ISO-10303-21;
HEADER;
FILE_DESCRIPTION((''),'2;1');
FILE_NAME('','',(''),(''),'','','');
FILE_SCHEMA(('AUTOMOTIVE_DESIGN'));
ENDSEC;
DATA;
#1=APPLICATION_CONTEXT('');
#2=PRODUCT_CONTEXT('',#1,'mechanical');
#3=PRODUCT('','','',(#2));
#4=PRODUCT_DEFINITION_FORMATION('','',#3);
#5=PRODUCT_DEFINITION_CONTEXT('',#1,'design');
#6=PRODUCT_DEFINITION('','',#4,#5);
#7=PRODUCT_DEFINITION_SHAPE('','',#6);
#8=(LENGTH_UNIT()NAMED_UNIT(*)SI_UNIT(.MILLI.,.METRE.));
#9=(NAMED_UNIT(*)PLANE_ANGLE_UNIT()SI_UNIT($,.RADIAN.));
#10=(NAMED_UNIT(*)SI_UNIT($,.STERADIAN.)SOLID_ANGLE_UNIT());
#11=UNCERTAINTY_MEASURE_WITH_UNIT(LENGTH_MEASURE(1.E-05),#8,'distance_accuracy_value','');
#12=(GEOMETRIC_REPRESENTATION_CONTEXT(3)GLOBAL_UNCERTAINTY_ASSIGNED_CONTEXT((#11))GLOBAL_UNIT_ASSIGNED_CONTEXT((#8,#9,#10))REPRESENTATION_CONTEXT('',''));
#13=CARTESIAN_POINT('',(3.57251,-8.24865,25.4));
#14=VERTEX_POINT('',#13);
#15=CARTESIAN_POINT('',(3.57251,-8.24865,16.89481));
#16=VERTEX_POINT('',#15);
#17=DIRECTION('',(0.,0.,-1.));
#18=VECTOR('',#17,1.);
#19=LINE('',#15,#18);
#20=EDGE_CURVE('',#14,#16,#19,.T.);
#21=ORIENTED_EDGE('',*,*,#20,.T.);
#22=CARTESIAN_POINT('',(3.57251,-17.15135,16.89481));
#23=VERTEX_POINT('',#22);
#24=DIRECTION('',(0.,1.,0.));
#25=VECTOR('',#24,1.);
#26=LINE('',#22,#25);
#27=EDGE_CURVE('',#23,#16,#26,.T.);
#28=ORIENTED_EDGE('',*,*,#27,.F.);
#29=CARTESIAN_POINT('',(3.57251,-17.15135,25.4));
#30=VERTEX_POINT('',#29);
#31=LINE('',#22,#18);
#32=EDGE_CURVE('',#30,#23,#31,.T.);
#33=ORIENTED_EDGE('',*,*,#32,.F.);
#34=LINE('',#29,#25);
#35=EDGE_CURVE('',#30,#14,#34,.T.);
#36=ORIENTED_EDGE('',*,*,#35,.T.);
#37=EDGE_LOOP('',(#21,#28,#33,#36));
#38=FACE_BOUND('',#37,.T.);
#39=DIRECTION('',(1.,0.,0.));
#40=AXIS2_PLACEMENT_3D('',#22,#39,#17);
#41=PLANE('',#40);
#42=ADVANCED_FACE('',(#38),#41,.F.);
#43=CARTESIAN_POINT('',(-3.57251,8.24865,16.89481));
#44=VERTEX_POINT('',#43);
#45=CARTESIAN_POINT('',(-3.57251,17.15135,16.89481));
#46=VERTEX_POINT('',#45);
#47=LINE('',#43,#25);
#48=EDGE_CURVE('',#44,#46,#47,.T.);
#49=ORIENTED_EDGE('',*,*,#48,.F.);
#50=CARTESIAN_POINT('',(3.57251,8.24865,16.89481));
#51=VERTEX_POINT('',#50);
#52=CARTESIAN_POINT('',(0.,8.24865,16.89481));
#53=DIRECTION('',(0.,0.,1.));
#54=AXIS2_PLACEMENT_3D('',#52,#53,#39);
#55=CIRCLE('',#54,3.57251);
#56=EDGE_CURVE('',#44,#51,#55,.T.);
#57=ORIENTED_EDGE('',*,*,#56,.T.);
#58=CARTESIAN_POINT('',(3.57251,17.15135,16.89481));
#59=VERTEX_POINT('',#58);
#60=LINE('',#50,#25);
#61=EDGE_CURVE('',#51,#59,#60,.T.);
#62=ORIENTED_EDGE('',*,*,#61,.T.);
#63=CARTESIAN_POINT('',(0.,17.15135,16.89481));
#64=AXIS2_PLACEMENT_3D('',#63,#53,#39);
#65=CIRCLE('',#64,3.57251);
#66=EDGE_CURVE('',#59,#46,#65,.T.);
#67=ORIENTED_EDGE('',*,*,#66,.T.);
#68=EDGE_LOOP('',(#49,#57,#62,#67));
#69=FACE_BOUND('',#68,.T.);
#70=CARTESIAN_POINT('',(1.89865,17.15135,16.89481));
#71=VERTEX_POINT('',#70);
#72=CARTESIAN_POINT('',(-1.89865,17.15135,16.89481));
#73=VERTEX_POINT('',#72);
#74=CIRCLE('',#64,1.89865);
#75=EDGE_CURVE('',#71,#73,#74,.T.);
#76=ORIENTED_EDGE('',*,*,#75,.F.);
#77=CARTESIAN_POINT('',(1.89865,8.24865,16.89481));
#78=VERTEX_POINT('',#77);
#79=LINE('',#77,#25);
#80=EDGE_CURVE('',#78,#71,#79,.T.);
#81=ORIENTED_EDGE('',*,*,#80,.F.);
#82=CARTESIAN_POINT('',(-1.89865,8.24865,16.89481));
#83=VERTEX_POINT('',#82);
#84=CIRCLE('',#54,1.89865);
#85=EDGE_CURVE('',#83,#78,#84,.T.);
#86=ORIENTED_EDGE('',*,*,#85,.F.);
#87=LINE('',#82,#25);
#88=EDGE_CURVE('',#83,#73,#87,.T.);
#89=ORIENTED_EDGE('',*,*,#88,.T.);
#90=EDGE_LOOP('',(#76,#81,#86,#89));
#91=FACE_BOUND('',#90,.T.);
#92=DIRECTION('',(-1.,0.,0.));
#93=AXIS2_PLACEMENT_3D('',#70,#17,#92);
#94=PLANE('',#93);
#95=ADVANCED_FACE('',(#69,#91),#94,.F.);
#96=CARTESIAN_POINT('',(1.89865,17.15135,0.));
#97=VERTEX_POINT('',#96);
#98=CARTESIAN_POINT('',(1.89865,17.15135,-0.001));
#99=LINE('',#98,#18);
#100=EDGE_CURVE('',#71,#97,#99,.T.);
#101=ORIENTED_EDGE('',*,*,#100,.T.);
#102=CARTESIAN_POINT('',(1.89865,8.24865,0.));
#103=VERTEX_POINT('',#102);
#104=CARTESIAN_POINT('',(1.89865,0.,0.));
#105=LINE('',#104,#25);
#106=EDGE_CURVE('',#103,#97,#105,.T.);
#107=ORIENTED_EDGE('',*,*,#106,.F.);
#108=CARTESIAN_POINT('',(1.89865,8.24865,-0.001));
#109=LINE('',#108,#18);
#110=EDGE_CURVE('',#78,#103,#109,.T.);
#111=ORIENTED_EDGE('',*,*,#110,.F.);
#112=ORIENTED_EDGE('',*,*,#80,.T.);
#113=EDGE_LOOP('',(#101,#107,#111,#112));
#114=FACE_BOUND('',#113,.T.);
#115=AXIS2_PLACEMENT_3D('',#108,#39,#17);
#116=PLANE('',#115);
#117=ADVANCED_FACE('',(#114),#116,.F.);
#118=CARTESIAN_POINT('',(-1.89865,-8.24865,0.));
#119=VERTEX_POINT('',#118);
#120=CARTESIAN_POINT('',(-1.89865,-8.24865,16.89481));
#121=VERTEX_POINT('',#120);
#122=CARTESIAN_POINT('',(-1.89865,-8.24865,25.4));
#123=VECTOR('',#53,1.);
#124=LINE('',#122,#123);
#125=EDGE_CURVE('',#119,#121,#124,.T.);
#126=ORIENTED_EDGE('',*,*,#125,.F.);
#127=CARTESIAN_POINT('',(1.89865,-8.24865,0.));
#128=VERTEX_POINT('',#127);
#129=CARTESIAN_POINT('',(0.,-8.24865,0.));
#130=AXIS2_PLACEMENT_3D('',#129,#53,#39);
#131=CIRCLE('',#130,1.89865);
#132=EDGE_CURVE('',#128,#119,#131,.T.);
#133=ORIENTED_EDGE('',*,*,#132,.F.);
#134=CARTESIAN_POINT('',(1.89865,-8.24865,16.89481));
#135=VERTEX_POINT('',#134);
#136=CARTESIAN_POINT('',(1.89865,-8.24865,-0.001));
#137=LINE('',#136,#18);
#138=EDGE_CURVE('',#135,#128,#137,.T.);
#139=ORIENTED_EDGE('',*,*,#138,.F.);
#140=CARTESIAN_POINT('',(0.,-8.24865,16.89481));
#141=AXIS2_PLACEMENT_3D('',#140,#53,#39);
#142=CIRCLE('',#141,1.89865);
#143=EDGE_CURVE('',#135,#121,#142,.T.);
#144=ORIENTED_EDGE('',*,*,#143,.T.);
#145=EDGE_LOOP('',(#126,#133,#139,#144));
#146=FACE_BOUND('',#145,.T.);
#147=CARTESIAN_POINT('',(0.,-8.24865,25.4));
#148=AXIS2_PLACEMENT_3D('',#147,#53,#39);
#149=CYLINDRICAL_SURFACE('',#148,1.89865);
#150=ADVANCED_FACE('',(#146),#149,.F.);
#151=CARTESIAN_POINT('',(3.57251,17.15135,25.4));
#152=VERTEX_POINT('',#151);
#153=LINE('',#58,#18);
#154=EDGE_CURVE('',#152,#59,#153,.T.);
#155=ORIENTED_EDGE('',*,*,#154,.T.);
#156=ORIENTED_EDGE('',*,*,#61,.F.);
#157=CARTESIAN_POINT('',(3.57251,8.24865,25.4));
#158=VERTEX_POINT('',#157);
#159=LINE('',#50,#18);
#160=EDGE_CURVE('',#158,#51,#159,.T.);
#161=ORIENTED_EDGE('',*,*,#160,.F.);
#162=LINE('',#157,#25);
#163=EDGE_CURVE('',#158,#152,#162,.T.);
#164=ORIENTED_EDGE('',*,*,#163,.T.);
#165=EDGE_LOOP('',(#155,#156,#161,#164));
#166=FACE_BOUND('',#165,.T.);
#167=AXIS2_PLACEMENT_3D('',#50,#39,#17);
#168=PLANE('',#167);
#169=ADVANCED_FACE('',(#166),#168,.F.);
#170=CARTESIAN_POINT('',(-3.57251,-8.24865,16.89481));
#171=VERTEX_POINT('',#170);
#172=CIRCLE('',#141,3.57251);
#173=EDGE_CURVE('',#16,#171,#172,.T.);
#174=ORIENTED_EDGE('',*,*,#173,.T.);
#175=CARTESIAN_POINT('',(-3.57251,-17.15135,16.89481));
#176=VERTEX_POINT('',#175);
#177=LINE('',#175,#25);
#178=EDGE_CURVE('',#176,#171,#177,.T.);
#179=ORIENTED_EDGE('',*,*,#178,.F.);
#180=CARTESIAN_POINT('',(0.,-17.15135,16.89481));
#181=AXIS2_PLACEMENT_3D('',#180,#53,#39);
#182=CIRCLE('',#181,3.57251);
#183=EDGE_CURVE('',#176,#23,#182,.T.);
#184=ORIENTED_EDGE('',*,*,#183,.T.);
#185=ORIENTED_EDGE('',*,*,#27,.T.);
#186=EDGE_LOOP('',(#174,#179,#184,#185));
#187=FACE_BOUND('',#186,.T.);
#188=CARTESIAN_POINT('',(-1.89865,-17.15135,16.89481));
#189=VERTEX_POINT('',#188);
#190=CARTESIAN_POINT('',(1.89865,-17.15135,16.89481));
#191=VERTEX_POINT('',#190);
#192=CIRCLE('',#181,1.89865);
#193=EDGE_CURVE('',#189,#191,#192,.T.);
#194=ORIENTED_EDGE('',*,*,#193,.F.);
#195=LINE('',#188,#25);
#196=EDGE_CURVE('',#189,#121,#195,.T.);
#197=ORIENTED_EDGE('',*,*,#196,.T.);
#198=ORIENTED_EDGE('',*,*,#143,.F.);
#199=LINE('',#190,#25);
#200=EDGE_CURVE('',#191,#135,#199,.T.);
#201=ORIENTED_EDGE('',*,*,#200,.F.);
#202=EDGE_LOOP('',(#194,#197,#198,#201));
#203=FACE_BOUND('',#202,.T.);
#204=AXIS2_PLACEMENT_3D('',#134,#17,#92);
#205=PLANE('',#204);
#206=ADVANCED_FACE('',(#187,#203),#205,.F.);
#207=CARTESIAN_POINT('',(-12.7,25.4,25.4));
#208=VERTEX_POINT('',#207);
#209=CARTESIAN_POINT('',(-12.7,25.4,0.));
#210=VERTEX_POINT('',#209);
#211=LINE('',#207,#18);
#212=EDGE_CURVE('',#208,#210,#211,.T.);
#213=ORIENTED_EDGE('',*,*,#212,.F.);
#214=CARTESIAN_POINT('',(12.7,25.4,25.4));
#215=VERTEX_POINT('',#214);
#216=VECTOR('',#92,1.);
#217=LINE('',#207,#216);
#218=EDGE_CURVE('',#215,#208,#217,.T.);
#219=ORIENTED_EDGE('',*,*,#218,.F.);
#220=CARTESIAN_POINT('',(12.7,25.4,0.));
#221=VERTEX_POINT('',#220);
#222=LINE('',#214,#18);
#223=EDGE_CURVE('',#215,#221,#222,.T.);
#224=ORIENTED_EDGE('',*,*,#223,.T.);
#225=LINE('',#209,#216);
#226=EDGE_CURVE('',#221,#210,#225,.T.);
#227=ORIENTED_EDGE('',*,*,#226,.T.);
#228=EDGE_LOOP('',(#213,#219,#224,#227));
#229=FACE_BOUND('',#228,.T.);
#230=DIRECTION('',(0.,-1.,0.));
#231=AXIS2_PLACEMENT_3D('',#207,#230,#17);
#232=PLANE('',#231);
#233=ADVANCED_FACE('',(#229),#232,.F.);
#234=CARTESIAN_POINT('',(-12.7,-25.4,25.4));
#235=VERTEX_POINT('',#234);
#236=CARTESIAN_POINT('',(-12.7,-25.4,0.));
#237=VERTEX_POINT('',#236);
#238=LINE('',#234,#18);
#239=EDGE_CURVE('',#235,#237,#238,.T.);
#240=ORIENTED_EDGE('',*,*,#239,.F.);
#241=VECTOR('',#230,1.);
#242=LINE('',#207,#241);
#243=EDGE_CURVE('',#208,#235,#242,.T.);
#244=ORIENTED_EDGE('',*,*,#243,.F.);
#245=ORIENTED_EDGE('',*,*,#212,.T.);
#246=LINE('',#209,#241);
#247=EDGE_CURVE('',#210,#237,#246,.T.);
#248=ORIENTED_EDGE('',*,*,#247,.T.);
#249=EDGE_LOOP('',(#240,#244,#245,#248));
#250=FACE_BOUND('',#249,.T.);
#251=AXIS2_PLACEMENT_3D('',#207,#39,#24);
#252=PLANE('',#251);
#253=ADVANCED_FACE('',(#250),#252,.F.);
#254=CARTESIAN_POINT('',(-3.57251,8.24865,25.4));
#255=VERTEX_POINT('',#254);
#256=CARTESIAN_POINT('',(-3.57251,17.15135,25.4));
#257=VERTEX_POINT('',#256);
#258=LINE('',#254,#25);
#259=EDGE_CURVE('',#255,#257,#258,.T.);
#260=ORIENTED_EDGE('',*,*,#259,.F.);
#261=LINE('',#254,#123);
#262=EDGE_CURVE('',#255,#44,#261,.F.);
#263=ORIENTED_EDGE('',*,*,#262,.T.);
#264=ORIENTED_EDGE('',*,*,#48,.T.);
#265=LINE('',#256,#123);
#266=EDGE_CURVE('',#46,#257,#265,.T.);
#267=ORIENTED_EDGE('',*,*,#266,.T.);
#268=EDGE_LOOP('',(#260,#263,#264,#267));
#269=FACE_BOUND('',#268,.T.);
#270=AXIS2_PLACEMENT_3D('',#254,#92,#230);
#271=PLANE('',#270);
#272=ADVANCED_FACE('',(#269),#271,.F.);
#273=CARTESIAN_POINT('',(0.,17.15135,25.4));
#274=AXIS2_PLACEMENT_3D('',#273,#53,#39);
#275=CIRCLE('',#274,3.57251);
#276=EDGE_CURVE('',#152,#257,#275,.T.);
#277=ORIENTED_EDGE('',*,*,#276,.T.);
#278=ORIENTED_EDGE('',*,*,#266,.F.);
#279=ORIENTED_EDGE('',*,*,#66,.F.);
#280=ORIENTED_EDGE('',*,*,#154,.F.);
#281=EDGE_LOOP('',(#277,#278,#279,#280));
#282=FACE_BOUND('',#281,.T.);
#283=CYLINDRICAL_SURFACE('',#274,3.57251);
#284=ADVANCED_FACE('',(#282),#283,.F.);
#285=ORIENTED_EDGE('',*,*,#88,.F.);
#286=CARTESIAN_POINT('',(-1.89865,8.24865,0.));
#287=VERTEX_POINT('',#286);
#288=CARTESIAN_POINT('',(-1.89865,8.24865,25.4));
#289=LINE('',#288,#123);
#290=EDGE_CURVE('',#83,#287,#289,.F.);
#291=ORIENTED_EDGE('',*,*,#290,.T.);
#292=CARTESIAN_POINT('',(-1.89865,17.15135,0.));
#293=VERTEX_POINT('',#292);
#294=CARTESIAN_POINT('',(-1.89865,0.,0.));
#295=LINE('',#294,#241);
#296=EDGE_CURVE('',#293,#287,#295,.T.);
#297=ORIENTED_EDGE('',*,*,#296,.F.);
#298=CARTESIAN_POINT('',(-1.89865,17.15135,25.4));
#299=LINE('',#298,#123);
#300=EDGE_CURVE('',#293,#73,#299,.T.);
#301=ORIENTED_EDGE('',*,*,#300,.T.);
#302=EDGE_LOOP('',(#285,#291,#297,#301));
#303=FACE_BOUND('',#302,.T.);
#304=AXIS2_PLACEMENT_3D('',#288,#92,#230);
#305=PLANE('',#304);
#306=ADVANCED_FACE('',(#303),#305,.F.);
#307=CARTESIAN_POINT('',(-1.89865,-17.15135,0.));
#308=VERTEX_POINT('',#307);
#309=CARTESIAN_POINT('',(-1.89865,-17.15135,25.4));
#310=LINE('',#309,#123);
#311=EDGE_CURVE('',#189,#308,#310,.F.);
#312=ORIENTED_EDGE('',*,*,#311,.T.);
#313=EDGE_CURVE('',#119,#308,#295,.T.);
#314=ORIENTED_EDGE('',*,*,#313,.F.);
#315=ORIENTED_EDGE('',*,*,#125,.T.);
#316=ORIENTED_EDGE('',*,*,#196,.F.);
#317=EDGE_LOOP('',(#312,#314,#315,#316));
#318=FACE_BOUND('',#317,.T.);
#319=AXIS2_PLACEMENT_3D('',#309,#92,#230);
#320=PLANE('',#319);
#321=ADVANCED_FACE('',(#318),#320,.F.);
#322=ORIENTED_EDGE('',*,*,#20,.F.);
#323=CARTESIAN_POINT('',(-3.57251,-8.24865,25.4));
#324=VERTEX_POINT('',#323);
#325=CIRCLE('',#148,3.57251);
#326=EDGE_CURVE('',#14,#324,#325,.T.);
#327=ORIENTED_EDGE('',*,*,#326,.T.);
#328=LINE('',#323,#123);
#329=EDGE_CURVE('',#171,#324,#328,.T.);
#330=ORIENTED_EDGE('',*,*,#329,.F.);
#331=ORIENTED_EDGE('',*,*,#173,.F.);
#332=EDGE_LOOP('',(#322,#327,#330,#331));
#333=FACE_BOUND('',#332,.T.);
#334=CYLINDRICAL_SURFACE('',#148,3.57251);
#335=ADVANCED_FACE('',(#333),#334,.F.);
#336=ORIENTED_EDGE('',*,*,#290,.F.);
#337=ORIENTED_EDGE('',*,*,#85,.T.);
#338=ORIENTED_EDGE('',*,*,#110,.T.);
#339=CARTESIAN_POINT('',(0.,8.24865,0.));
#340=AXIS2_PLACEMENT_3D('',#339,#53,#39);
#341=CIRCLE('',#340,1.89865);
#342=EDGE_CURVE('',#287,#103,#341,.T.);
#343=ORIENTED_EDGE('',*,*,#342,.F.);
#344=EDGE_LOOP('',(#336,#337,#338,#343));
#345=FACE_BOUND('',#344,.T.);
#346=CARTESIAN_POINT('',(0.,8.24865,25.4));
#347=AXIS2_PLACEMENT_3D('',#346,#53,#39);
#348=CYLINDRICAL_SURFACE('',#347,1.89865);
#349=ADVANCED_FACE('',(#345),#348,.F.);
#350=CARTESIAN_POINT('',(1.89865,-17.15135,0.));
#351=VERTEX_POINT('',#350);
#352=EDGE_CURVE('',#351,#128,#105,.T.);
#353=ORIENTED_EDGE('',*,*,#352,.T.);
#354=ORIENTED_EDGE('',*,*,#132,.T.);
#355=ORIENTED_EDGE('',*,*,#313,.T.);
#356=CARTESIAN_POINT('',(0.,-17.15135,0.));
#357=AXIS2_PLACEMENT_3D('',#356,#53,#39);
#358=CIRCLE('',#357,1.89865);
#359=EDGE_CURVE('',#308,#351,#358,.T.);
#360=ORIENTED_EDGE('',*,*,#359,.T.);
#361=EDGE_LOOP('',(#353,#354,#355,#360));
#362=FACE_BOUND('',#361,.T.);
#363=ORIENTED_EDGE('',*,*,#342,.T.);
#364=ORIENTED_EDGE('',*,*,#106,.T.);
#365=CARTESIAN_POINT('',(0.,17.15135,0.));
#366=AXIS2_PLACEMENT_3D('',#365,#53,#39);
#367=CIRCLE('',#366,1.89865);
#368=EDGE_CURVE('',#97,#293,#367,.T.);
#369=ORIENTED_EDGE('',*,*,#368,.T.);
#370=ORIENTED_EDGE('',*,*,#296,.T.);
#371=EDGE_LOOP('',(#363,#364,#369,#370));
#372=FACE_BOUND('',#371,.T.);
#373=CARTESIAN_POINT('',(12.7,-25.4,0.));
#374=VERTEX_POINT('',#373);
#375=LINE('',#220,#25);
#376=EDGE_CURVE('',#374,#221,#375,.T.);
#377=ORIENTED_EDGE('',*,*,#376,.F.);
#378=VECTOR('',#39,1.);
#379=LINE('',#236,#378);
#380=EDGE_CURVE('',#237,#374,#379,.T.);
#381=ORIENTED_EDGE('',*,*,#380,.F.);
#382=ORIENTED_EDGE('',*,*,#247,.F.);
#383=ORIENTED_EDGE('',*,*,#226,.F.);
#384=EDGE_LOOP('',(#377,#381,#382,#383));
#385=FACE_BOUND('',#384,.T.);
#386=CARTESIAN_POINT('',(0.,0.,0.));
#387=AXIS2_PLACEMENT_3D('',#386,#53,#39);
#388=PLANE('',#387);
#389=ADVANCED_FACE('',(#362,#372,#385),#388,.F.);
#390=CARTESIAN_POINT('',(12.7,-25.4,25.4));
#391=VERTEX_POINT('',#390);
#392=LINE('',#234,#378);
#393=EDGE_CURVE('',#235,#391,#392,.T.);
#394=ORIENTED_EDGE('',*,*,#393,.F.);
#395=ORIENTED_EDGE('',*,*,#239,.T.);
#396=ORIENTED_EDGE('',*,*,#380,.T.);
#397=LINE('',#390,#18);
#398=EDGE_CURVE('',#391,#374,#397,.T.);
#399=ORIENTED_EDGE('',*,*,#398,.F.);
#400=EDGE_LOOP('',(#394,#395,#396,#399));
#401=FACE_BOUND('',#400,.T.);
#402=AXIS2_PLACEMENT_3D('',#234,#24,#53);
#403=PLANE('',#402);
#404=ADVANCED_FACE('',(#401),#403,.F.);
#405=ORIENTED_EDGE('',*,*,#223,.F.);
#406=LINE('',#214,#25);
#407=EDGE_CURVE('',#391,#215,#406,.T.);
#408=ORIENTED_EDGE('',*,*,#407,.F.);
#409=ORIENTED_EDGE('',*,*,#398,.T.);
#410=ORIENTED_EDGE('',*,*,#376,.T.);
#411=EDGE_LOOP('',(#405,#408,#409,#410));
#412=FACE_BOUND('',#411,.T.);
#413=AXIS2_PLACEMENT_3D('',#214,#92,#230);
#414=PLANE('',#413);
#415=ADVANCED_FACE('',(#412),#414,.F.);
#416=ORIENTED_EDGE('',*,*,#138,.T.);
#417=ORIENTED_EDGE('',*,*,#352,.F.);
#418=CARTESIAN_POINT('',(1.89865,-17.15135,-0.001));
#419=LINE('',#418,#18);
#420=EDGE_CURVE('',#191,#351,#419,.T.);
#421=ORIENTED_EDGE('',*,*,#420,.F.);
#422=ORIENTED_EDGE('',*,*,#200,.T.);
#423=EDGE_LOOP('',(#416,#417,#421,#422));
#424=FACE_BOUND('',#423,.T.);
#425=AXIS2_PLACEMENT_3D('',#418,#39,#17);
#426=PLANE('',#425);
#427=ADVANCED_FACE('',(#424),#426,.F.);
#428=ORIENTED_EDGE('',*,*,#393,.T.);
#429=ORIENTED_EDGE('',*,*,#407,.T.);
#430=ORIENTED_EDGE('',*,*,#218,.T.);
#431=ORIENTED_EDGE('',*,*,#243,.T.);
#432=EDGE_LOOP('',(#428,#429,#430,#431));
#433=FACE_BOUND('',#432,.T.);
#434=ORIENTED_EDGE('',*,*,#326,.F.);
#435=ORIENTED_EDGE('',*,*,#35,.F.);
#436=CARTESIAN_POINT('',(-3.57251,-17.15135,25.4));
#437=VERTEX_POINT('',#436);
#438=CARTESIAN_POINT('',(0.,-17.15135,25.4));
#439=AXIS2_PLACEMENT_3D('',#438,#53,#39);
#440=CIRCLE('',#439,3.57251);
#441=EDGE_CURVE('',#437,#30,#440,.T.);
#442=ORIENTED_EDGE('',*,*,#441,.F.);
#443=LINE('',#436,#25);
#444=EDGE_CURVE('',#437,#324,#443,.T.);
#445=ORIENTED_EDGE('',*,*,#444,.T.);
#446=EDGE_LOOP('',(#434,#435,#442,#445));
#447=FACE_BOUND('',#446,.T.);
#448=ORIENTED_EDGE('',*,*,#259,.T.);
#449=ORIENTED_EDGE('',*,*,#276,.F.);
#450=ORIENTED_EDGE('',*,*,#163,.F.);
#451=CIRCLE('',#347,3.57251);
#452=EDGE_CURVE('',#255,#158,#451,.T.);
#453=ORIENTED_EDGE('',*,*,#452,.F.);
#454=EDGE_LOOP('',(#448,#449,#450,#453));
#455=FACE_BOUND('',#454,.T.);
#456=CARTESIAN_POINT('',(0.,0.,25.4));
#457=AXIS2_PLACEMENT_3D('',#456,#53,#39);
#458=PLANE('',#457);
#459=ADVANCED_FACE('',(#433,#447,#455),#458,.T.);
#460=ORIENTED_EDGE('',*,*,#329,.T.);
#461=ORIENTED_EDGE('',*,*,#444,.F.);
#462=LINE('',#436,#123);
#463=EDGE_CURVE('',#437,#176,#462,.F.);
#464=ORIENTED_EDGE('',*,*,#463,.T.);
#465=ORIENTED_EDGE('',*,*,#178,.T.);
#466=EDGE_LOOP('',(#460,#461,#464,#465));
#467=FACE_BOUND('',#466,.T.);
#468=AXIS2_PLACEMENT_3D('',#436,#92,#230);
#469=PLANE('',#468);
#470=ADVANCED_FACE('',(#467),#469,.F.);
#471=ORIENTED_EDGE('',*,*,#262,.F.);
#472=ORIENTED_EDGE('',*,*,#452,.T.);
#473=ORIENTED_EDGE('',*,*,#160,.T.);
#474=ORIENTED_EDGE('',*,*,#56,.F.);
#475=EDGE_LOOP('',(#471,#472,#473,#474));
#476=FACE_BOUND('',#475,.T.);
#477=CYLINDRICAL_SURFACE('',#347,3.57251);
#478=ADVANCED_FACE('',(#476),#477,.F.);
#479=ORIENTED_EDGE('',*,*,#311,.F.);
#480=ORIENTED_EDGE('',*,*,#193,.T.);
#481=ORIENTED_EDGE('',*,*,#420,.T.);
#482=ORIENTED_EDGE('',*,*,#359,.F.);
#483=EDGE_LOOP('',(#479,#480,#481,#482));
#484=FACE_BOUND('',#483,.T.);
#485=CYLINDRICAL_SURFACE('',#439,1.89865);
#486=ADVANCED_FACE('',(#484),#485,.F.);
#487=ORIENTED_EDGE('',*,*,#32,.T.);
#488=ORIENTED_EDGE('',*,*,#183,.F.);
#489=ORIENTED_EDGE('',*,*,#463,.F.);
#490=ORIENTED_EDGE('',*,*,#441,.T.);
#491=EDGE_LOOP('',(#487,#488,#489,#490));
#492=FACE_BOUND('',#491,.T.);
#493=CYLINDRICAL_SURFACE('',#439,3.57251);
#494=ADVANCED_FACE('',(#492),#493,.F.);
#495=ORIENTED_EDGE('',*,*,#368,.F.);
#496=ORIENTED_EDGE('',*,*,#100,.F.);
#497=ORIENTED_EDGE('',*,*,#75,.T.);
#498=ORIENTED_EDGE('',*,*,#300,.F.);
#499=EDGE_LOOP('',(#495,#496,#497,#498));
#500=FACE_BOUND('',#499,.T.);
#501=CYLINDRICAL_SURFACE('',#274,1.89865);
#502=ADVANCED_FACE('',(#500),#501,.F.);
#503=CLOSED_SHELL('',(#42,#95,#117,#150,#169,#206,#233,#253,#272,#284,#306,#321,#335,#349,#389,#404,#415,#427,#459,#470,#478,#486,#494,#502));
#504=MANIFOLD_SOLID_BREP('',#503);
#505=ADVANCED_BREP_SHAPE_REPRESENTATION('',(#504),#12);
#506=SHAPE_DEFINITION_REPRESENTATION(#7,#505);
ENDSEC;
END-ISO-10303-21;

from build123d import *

# Parameters (mm, degrees)
SKETCH1_W                                     = 25.4
SKETCH1_H                                     = 50.8
BOSS_EXTRUDE1_DEPTH                           = 25.4
CBORE_SLOT_FOR_6_SOCKET_HEAD_CAP_SCREW1_DEPTH = 25.4
CBORE_START                                   = 16.89481
CBORE_SLOT_FOR_6_SOCKET_HEAD_CAP_SC_3_DEPTH   = 8.50519


# Read off the part's stored shape, not the designer's step: CBORE SLOT for #6 Socket Head Cap Screw1
with BuildPart() as part:
    # Sketch1 → Boss-Extrude1 (new body)
    with BuildSketch(Plane.XY):
        Rectangle(SKETCH1_W, SKETCH1_H)
    extrude(amount=BOSS_EXTRUDE1_DEPTH)

    # CBORE SLOT for _6 Socket Head Cap Sc 2 → CBORE SLOT for #6 Socket Head Cap Screw1 (cut)
    with BuildSketch(Plane.XY):
        with BuildLine():
            Line((1.89865, -17.15135), (1.89865, -8.24865))
            ThreePointArc((1.89865, -8.24865), (0, -6.35), (-1.89865, -8.24865))
            Line((-1.89865, -8.24865), (-1.89865, -17.15135))
            ThreePointArc((-1.89865, -17.15135), (0, -19.05), (1.89865, -17.15135))
        make_face()
        with BuildLine():
            ThreePointArc((1.89865, 17.15135), (0, 19.05), (-1.89865, 17.15135))
            Line((-1.89865, 17.15135), (-1.89865, 8.24865))
            ThreePointArc((-1.89865, 8.24865), (0, 6.35), (1.89865, 8.24865))
            Line((1.89865, 8.24865), (1.89865, 17.15135))
        make_face()
    extrude(amount=CBORE_SLOT_FOR_6_SOCKET_HEAD_CAP_SCREW1_DEPTH, mode=Mode.SUBTRACT)

    # CBORE SLOT for _6 Socket Head Cap Sc 3 o → CBORE SLOT for _6 Socket Head Cap Sc 3 (cut)
    # profile 1 of 2: a face of its own
    with BuildSketch(Plane.XY.offset(CBORE_START)):
        with BuildLine():
            Line((3.57251, -17.15135), (3.57251, -8.24865))
            ThreePointArc((3.57251, -8.24865), (0, -4.67614), (-3.57251, -8.24865))
            Line((-3.57251, -8.24865), (-3.57251, -17.15135))
            ThreePointArc((-3.57251, -17.15135), (0, -20.72386), (3.57251, -17.15135))
        make_face()
        with BuildLine():
            ThreePointArc((-1.89865, -8.24865), (0, -6.35), (1.89865, -8.24865))
            Line((1.89865, -8.24865), (1.89865, -17.15135))
            ThreePointArc((1.89865, -17.15135), (0, -19.05), (-1.89865, -17.15135))
            Line((-1.89865, -17.15135), (-1.89865, -8.24865))
        make_face(mode=Mode.SUBTRACT)
    # profile 2 of 2: a face of its own
    with BuildSketch(Plane.XY.offset(CBORE_START)):
        with BuildLine():
            ThreePointArc((3.57251, 17.15135), (0, 20.72386), (-3.57251, 17.15135))
            Line((-3.57251, 17.15135), (-3.57251, 8.24865))
            ThreePointArc((-3.57251, 8.24865), (0, 4.67614), (3.57251, 8.24865))
            Line((3.57251, 8.24865), (3.57251, 17.15135))
        make_face()
        with BuildLine():
            Line((-1.89865, 8.24865), (-1.89865, 17.15135))
            ThreePointArc((-1.89865, 17.15135), (0, 19.05), (1.89865, 17.15135))
            Line((1.89865, 17.15135), (1.89865, 8.24865))
            ThreePointArc((1.89865, 8.24865), (0, 6.35), (-1.89865, 8.24865))
        make_face(mode=Mode.SUBTRACT)
    extrude(amount=CBORE_SLOT_FOR_6_SOCKET_HEAD_CAP_SC_3_DEPTH, mode=Mode.SUBTRACT)


solid = part.part
